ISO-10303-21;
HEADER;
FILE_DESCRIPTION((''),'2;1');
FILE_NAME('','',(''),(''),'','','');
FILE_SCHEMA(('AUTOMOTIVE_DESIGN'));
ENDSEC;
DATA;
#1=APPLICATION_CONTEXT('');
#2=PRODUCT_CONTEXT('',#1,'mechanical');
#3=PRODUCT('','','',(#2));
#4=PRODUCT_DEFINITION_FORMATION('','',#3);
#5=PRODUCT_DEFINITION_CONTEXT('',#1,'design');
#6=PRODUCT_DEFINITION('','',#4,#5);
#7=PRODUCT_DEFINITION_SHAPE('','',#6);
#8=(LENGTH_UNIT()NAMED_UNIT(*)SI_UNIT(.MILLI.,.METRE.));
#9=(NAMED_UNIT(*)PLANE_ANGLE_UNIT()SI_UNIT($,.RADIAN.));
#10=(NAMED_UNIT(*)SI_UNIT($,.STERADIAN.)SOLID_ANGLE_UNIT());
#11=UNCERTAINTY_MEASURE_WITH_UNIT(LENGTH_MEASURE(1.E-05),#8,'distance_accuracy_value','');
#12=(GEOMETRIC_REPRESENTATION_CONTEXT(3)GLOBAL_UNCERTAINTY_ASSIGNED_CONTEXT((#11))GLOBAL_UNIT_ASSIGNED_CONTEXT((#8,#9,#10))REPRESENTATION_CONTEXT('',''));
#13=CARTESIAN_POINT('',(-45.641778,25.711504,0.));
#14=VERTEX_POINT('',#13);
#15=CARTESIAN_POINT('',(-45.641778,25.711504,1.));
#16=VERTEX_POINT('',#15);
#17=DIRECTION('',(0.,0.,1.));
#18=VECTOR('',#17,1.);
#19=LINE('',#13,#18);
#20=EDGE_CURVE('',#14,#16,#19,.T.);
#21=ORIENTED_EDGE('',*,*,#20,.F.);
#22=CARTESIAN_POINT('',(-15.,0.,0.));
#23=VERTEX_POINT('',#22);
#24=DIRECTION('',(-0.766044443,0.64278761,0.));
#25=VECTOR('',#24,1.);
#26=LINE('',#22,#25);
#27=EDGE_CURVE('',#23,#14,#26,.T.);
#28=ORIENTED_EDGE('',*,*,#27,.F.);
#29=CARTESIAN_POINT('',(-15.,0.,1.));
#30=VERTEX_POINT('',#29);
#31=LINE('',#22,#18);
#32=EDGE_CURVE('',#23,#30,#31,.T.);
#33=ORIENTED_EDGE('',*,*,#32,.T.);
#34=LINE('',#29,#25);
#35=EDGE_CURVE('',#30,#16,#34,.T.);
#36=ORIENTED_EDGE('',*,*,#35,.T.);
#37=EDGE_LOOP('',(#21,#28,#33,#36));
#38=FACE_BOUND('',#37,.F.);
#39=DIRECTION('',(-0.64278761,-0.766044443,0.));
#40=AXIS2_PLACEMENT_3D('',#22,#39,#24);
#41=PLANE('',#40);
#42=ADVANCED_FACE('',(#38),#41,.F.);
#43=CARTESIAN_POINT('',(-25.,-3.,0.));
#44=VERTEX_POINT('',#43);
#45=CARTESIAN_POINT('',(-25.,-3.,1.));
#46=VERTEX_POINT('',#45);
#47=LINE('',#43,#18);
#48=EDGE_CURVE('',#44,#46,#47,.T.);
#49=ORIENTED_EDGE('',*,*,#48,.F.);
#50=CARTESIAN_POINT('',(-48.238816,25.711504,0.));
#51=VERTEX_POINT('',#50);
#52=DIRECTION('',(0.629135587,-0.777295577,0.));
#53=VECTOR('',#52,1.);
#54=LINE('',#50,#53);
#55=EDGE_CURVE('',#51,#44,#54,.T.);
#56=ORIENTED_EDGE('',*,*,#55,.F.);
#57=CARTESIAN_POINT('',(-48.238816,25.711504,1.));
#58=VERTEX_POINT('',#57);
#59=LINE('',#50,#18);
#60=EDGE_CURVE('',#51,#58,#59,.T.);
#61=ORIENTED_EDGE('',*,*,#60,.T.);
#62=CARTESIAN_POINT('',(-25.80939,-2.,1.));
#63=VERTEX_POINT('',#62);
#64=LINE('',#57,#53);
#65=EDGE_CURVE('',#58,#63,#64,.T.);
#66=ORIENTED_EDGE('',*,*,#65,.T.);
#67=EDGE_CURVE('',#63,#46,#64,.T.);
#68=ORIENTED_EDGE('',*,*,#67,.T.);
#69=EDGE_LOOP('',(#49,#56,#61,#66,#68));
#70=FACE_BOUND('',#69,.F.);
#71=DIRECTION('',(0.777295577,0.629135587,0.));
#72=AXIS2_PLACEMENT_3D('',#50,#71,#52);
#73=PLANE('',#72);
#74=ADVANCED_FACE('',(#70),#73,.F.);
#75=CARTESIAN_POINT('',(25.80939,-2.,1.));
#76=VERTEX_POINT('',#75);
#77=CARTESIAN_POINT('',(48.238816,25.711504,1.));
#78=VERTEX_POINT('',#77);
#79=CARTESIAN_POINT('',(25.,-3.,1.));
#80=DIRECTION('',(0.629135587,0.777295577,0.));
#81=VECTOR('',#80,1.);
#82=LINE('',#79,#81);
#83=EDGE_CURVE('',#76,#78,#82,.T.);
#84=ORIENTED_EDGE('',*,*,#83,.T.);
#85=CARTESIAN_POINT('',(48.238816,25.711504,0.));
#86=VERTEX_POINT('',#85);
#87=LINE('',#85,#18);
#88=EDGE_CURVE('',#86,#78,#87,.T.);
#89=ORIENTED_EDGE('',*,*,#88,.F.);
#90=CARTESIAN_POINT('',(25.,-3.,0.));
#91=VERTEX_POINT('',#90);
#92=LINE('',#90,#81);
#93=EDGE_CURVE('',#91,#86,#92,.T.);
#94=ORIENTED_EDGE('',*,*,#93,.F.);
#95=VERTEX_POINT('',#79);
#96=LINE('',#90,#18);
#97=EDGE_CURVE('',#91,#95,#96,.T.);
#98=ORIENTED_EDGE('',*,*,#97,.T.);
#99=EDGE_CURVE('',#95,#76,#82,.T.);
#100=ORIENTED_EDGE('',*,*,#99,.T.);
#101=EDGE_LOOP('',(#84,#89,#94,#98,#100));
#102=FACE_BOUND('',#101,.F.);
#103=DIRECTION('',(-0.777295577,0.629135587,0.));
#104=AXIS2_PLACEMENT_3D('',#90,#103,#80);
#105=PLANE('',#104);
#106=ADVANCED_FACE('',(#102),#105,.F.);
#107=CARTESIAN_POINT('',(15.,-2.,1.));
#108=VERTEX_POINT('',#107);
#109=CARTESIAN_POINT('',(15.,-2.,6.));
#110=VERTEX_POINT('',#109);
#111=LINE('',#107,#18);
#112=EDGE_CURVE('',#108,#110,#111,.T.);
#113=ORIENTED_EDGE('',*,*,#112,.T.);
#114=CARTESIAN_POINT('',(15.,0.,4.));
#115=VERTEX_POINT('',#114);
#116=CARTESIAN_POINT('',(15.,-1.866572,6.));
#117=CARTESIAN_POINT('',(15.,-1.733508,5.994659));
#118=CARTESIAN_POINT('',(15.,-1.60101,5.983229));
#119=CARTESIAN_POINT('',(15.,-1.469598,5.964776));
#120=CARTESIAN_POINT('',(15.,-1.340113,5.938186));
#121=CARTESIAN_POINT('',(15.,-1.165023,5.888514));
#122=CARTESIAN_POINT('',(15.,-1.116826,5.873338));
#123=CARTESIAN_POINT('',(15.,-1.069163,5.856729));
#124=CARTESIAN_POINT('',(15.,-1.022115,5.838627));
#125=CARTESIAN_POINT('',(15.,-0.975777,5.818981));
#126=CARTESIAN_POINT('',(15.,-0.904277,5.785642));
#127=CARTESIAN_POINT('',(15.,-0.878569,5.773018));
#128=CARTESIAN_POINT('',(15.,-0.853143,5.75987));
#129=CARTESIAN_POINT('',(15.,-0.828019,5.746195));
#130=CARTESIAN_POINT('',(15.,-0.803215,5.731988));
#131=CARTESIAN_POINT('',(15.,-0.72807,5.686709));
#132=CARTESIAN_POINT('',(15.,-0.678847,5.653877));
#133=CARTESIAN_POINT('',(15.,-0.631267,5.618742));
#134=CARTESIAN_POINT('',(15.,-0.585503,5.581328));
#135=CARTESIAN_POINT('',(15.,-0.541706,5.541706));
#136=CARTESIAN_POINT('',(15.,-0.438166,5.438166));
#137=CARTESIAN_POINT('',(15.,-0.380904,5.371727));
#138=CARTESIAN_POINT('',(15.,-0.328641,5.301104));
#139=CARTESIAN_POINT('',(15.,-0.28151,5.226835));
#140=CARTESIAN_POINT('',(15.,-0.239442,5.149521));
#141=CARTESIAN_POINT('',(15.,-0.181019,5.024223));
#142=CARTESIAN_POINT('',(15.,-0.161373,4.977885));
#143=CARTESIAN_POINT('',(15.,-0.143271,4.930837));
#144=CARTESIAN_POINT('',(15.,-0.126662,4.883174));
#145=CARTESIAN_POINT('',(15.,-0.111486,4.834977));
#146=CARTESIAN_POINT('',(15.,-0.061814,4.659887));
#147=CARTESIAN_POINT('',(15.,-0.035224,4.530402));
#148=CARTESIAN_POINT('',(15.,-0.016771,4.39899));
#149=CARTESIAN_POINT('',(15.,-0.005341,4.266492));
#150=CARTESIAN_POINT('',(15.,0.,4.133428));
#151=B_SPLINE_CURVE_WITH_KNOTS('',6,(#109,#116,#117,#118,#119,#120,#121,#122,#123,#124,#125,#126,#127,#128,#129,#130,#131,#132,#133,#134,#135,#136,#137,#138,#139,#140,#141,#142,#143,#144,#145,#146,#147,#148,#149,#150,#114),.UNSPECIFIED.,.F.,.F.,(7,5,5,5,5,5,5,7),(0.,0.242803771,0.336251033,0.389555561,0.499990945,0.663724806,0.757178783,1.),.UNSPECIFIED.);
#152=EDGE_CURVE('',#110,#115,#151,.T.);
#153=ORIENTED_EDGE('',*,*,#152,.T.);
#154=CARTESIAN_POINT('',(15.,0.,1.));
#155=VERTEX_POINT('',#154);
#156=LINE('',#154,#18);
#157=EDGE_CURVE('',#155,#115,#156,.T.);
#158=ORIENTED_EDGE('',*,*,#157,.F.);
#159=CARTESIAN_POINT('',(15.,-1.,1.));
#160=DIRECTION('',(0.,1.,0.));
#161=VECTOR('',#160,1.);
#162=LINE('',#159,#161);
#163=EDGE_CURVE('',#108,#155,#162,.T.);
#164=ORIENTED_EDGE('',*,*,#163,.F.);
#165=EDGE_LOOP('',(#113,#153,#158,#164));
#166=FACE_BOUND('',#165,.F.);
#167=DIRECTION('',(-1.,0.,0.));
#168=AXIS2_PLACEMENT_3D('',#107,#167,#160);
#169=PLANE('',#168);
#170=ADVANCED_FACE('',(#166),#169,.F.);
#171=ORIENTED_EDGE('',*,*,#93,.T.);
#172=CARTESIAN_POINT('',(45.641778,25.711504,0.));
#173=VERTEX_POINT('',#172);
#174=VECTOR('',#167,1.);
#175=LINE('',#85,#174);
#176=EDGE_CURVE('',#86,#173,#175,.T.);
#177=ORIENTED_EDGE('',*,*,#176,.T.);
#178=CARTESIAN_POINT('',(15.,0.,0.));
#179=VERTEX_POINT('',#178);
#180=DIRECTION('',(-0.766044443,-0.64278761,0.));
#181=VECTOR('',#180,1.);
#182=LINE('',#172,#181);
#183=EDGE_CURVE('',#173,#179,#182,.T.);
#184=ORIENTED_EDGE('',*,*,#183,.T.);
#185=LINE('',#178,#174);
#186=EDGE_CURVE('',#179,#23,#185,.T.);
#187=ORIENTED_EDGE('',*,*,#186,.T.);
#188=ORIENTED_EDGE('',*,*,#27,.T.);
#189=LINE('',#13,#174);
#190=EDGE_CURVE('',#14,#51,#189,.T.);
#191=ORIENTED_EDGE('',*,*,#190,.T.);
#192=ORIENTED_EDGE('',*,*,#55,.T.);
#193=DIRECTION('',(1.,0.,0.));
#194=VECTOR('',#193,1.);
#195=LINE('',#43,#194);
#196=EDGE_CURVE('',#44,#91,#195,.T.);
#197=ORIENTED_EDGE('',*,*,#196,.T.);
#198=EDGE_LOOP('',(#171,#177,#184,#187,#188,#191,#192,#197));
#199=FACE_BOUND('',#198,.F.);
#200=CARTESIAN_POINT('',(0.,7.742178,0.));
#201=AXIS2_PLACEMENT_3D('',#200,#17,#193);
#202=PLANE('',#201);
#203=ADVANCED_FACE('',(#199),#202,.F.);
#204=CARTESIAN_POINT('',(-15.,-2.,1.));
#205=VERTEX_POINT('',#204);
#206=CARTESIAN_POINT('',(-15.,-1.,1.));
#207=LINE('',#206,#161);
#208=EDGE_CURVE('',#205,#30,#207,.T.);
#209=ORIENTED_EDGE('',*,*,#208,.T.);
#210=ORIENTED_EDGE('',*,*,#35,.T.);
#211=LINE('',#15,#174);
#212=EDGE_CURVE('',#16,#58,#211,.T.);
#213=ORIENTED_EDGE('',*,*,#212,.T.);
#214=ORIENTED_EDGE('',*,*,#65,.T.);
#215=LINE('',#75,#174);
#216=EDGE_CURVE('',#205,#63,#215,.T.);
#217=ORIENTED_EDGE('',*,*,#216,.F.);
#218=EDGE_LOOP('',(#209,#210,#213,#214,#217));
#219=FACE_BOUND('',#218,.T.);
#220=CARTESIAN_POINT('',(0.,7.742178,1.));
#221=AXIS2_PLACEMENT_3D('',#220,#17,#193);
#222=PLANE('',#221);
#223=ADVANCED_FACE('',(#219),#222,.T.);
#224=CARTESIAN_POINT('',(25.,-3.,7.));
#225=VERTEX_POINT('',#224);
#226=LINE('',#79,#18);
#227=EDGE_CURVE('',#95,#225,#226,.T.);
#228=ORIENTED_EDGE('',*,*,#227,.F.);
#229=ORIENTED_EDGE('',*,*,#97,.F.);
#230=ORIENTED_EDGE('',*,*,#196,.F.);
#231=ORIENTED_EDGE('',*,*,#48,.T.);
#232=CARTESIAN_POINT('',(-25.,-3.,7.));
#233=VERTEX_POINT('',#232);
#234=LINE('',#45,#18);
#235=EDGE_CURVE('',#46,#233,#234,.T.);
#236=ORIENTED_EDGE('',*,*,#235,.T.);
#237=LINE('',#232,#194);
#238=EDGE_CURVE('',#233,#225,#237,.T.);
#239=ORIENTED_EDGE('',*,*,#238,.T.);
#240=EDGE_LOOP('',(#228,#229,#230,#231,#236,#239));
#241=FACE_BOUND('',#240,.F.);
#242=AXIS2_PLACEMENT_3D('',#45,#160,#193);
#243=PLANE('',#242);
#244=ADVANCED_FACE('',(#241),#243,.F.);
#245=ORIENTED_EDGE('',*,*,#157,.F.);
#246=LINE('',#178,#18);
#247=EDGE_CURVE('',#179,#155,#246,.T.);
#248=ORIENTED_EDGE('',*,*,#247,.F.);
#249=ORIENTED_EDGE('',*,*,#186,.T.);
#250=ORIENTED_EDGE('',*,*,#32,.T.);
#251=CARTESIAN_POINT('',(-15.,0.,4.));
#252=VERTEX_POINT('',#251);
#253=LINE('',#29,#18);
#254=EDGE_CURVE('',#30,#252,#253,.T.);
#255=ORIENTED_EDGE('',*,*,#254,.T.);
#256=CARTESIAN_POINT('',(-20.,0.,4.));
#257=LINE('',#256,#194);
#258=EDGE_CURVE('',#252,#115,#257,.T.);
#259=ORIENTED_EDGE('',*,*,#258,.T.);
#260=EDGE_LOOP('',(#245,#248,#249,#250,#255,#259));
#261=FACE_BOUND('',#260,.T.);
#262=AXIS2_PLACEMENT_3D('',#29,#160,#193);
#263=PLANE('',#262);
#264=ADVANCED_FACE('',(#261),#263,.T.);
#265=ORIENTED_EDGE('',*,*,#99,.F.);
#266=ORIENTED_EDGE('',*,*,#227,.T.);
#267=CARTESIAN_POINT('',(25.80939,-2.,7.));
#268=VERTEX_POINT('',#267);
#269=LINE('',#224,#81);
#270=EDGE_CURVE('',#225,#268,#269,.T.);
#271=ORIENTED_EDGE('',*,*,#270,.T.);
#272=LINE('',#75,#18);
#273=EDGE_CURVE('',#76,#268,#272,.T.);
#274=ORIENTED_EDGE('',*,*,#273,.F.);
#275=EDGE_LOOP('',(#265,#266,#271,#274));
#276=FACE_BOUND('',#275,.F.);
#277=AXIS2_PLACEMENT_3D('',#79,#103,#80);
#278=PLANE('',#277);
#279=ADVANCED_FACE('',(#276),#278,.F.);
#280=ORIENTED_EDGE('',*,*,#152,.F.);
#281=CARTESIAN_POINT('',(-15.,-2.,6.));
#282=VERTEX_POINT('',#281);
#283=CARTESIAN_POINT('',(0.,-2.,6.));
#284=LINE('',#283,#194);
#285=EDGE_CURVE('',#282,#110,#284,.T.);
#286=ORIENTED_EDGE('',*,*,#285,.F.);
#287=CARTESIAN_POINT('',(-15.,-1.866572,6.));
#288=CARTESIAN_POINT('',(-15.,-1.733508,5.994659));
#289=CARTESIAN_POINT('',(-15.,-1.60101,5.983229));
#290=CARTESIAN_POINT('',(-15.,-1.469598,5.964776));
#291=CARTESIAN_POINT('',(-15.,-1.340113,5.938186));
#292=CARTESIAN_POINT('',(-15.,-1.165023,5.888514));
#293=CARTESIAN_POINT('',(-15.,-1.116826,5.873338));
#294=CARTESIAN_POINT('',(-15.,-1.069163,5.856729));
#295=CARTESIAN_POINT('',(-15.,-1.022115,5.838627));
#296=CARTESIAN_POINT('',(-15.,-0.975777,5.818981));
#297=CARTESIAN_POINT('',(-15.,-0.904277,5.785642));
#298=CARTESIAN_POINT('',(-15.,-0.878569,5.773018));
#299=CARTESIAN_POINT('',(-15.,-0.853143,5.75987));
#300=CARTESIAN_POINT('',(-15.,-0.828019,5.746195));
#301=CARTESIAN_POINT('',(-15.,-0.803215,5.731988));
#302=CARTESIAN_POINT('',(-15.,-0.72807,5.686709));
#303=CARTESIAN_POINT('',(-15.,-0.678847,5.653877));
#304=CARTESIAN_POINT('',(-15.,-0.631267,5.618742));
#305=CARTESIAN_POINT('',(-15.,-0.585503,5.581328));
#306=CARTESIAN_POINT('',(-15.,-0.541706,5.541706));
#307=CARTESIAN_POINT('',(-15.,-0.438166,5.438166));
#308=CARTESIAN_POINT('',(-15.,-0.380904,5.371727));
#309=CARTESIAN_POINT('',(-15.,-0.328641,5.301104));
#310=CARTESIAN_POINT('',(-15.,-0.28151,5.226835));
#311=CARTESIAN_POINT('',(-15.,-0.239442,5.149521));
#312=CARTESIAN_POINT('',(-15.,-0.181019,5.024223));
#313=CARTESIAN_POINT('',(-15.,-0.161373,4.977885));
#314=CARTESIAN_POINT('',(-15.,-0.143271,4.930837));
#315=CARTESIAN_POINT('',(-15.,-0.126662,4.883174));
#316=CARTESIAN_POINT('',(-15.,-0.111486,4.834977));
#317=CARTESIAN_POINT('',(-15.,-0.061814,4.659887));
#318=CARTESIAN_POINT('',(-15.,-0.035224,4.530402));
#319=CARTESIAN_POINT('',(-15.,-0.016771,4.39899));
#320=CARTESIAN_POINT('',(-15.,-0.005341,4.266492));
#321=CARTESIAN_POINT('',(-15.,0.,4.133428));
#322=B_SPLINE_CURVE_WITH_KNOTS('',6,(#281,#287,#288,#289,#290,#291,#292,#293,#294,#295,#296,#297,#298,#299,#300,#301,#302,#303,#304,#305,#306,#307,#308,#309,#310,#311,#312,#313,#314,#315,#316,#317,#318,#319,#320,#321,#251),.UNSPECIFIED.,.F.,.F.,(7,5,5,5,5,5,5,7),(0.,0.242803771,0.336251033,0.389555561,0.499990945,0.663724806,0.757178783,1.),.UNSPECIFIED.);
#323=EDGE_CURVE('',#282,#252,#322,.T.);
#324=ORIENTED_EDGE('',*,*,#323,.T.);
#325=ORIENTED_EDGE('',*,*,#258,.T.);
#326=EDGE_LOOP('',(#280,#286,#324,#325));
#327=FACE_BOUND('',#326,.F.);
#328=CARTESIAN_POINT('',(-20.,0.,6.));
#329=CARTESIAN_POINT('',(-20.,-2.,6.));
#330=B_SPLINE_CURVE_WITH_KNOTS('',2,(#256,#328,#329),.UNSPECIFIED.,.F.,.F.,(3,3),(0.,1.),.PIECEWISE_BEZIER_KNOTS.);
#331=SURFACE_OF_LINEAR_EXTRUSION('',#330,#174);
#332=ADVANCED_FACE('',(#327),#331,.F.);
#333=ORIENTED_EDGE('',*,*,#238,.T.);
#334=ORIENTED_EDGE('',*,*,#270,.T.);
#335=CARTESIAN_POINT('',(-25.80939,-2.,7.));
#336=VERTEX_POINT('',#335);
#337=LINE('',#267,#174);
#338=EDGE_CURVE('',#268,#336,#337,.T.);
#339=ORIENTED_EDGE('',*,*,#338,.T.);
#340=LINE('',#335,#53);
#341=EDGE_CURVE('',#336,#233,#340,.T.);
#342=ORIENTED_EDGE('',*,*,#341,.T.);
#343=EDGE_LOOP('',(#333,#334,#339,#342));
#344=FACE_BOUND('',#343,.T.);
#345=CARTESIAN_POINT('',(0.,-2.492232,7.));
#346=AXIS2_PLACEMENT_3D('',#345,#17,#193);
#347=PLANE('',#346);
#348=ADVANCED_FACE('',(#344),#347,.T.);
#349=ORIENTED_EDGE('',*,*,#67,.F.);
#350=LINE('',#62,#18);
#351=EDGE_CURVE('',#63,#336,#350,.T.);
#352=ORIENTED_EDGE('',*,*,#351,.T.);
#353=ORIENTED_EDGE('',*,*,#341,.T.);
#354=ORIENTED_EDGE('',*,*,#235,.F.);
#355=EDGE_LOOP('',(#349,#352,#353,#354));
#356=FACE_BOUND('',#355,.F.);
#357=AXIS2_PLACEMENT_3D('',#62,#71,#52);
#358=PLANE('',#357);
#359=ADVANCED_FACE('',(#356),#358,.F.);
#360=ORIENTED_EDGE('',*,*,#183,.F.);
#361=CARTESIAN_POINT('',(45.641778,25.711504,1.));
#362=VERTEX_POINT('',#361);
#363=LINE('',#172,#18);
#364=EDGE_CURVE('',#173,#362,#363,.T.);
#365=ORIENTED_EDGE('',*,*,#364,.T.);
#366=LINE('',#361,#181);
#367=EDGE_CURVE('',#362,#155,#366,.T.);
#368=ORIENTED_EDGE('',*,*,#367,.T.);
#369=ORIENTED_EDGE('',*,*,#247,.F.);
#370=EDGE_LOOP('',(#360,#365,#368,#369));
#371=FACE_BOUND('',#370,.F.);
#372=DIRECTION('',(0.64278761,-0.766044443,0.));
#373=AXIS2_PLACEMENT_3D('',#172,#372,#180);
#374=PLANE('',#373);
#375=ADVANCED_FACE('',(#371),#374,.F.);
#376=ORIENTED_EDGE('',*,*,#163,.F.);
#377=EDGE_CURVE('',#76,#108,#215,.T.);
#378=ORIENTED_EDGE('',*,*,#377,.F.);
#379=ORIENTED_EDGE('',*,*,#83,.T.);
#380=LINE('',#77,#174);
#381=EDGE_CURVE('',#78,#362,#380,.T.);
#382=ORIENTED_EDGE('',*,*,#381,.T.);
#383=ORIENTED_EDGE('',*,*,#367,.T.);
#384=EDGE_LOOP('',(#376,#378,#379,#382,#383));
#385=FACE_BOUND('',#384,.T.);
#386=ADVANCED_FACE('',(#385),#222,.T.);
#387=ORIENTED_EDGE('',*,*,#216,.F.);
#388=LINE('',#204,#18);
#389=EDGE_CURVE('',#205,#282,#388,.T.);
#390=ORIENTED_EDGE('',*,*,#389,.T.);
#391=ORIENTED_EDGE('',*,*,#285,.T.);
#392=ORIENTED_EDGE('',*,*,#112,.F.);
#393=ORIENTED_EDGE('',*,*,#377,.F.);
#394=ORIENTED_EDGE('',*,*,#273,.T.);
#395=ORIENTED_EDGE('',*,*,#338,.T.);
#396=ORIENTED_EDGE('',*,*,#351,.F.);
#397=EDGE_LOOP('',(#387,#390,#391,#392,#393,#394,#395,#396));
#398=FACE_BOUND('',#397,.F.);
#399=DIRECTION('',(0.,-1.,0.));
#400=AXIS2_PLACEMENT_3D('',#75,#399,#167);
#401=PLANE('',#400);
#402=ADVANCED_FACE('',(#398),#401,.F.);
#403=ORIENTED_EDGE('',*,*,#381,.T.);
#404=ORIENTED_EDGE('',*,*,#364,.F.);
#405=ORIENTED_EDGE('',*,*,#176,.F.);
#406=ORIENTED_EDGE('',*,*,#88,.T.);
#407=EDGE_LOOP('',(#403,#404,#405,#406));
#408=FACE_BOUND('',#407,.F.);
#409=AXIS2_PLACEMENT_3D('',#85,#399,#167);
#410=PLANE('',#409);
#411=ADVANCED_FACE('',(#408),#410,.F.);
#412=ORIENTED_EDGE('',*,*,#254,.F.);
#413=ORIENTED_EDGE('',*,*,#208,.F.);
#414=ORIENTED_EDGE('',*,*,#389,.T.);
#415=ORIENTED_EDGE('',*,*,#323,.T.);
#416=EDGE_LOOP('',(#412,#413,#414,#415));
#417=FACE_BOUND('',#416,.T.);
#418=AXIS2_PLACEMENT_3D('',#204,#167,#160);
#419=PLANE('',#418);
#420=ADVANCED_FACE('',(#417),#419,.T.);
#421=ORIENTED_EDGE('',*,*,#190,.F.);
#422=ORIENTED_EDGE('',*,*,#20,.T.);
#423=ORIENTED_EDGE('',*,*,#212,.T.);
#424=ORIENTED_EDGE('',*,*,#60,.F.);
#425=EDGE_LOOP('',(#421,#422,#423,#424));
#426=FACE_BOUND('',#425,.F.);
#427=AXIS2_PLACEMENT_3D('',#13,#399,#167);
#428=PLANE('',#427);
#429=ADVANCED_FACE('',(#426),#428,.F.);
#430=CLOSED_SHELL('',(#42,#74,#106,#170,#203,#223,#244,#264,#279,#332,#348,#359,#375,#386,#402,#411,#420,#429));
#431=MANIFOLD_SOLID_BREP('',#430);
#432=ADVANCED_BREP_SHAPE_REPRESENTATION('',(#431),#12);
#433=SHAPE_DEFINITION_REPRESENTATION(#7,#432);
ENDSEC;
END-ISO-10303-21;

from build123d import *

# Parameters (mm, degrees)
F1_DEPTH    = 1
F3_DEPTH    = 6
F2_W        = 30
F2_H        = 2
F4_DEPTH    = 5
F5_T1_DEPTH = 40


# Not quite as in the source:
# - a fillet or chamfer that OpenCascade refuses, or shapes differently, is made with other operations: its cross-section is extruded or revolved along the edge and cut away or added


with BuildPart() as f1:
    # F0 (on Top) → F1 (new body)
    with BuildSketch(Plane.XY):
        Polygon((15, 0), (0, 0), (-15, 0), (-45.6417777248, 25.7115043875), (-48.2388163507, 25.7115043875), (-25, -3), (0, -3), (25, -3), (48.2388163507, 25.7115043875), (45.6417777248, 25.7115043875), align=None)
    extrude(amount=F1_DEPTH)

    # F2 (on face) → F3 (join)
    with BuildSketch(Plane.XY.offset(1)):
        Polygon((-15, -2), (-25.8093904115, -2), (-25, -3), (25, -3), (25.8093904115, -2), (15, -2), align=None)
    extrude(amount=F3_DEPTH)

    # F2 (on face) → F4 (join)
    with BuildSketch(Plane.XY.offset(1)):
        with Locations((0, -1)):
            Rectangle(F2_W, F2_H)
    extrude(amount=F4_DEPTH)

    # F5: fillet of radius 2 on 1 edges, made by hand

    # F5_s2 → F5_t1 (cut)
    with BuildSketch(Plane.YZ.offset(-20)):
        with BuildLine():
            add(Edge.make_bspline(
                [(0, 4), (0, 6), (-2, 6)],
                knots=[0, 0, 0, 1, 1, 1], degree=2, weights=[1, 1, 1]))
            Line((-2, 6), (0, 6))
            Line((0, 6), (0, 4))
        make_face()
    extrude(amount=F5_T1_DEPTH, mode=Mode.SUBTRACT)


solid = f1.part
